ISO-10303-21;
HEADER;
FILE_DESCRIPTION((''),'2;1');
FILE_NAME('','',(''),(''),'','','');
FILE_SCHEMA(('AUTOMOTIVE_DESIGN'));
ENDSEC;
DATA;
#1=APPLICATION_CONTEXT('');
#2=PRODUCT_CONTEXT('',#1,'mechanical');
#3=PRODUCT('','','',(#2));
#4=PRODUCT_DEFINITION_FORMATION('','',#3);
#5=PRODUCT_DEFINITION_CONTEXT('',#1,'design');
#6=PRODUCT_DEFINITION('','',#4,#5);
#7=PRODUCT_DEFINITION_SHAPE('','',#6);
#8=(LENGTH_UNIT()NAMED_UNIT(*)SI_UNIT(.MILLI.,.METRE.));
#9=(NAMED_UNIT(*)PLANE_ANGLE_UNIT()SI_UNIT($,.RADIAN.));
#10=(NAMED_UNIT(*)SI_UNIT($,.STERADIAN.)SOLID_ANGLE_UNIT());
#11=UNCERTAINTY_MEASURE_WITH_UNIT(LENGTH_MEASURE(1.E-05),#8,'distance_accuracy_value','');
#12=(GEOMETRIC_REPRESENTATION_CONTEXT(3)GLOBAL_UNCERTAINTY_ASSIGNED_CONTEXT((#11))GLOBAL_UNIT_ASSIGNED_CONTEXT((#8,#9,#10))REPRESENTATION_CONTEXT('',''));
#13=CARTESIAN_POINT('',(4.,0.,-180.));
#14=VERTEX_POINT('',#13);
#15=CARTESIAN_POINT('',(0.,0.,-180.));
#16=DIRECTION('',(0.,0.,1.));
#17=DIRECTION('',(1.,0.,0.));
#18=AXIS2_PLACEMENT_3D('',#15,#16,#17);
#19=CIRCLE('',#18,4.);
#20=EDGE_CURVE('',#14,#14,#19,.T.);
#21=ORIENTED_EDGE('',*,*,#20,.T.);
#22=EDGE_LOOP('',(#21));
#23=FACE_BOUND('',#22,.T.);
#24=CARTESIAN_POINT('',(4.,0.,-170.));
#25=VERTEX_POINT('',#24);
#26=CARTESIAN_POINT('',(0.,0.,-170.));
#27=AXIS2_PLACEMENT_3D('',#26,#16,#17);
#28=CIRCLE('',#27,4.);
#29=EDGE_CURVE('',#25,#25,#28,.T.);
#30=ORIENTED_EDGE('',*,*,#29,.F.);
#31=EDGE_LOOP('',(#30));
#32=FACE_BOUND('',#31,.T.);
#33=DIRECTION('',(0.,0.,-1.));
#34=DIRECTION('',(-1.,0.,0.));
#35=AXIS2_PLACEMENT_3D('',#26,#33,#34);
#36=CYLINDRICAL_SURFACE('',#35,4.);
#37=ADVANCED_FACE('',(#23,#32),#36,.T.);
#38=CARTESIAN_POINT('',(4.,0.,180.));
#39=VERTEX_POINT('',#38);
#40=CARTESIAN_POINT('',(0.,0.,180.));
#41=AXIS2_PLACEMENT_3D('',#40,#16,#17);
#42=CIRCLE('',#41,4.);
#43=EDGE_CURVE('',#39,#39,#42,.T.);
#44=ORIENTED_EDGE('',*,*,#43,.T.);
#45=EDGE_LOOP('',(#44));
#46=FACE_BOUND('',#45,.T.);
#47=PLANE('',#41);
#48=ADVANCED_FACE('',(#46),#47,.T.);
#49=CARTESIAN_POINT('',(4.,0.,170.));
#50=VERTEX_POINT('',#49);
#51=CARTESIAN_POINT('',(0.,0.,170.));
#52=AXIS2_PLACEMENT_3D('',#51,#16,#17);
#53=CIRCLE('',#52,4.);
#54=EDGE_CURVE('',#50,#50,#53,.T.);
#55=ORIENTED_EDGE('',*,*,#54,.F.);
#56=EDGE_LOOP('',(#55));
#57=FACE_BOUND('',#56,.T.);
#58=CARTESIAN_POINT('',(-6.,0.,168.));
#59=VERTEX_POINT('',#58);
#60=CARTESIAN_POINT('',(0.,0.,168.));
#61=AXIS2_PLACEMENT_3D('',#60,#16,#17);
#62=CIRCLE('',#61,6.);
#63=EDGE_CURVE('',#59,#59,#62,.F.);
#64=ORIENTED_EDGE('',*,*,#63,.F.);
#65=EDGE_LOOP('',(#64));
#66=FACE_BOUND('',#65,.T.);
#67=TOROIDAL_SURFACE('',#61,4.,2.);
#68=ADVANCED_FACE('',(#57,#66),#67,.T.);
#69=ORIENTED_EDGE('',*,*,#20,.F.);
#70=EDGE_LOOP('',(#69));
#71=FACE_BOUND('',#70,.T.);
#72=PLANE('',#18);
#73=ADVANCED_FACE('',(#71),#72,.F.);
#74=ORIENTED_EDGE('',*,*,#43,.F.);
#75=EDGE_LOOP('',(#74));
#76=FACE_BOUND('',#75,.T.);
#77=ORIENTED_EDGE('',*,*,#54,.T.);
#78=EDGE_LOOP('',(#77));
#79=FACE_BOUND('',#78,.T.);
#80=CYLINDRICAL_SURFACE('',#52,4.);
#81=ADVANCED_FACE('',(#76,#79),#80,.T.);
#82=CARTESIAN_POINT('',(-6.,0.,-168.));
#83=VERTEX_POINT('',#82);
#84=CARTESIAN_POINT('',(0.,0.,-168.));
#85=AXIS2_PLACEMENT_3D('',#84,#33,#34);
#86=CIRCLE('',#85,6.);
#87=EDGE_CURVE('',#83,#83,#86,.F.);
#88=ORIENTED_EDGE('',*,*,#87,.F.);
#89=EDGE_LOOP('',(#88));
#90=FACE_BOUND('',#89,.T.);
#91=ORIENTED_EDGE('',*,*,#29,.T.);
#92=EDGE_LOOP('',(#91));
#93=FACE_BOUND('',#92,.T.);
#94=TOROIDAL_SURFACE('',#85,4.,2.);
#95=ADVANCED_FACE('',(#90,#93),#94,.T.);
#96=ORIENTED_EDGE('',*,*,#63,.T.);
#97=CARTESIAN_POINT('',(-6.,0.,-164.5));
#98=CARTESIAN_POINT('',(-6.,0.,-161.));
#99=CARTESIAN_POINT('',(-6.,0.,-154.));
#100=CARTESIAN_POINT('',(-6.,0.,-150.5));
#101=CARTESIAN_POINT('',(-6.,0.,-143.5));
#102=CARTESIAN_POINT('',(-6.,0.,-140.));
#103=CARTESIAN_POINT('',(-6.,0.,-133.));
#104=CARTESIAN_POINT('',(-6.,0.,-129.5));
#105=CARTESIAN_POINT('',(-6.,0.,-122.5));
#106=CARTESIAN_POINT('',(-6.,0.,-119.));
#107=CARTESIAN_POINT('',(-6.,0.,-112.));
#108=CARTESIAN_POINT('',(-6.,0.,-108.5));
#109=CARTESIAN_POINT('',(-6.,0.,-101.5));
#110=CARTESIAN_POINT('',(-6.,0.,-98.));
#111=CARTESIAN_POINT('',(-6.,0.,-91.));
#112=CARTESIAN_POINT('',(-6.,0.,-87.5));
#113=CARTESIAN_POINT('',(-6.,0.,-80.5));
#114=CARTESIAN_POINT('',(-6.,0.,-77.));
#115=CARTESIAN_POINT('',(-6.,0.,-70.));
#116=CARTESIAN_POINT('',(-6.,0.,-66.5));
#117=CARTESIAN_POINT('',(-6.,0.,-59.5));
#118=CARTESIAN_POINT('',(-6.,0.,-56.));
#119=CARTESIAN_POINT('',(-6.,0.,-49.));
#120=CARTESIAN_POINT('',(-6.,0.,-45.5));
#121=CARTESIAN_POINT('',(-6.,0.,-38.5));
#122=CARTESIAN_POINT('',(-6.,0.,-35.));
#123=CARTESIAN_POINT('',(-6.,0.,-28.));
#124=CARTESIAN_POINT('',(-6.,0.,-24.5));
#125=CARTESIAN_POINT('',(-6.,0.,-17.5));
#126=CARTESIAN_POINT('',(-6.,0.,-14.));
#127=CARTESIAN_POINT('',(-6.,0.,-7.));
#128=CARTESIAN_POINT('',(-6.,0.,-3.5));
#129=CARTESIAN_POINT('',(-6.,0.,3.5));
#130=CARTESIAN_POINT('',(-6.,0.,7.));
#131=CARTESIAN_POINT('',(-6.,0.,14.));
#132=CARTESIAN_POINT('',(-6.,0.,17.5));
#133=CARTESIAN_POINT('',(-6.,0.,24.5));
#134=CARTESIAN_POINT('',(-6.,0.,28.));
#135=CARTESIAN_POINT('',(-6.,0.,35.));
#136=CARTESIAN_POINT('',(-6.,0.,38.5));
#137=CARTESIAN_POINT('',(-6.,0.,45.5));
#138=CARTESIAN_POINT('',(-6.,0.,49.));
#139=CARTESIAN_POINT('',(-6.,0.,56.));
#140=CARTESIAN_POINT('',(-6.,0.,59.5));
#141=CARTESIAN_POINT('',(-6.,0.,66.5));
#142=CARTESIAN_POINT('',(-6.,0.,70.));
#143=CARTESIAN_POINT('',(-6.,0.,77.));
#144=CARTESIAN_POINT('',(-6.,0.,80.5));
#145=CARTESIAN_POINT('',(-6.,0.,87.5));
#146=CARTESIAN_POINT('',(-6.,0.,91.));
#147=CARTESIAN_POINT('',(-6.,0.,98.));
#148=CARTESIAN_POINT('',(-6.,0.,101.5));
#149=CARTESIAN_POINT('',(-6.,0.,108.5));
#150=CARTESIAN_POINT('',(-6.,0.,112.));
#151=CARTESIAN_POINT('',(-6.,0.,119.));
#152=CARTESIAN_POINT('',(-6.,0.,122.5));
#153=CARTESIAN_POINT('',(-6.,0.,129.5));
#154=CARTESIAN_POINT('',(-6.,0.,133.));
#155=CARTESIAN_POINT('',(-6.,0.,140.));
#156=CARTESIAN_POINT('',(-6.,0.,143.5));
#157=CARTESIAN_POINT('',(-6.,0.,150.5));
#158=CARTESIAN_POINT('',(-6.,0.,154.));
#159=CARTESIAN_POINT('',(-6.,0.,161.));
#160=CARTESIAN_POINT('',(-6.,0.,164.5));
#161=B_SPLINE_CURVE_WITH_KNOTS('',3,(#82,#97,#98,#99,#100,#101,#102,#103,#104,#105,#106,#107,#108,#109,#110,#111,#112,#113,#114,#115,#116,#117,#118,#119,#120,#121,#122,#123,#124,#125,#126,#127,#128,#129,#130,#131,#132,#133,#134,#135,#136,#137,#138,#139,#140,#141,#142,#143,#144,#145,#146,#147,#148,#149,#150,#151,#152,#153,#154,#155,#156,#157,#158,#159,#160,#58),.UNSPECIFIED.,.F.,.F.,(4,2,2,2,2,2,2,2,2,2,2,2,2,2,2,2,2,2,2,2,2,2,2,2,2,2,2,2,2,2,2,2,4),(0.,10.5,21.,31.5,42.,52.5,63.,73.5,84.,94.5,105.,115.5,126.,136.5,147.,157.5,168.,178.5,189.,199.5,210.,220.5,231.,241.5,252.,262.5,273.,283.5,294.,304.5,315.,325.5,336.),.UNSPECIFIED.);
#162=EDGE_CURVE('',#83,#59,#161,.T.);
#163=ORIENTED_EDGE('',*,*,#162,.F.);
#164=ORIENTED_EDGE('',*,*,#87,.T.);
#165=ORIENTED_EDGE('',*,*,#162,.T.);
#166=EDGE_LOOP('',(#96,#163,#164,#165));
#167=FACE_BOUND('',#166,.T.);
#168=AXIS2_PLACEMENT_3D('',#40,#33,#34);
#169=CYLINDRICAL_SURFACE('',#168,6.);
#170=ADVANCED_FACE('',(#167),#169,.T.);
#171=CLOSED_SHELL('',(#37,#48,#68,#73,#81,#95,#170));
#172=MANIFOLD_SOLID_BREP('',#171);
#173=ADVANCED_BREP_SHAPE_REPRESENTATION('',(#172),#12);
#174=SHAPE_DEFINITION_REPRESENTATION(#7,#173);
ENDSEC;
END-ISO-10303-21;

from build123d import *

# Parameters (mm, degrees)
SKETCH1_R            = 6
BOSS_EXTRUDE1_DEPTH  = 180
SKETCH2_R            = 6
SKETCH2_R_2          = 4
CUT_EXTRUDE1_DEPTH   = 10
FILLET1_R            = 2
FILLET1_OF_MIRROR1_R = 2


with BuildPart() as part:
    # Sketch1 → Boss-Extrude1 (new, symmetric)
    with BuildSketch(Plane.XY):
        with Locations(Location((0, 0, 0), (0, 0, 180))):
            Circle(SKETCH1_R)
    extrude(amount=BOSS_EXTRUDE1_DEPTH, both=True)

    # Sketch2 → Cut-Extrude1 (cut)
    with BuildSketch(Plane.XY.offset(180)):
        with Locations(Location((0, 0, 0), (0, 0, 180))):
            Circle(SKETCH2_R)
        Circle(SKETCH2_R_2, mode=Mode.SUBTRACT)
    cut_extrude1 = extrude(amount=-CUT_EXTRUDE1_DEPTH, mode=Mode.SUBTRACT)

    # Fillet1
    fillet1_edges = [part.edges().sort_by_distance(p)[0] for p in [
        (6, 0, 170),
    ]]
    fillet(fillet1_edges, radius=FILLET1_R - 0.0001)  # a hair under: the kernel refuses the full size

    # Mirror1: Cut-Extrude1 across plane
    add(cut_extrude1.mirror(Plane.XY), mode=Mode.SUBTRACT)

    # Fillet1 of Mirror1
    fillet1_of_mirror1_edges = [part.edges().sort_by_distance(p)[0] for p in [
        (6, 0, -170),
    ]]
    fillet(fillet1_of_mirror1_edges, radius=FILLET1_OF_MIRROR1_R - 0.0001)  # a hair under: the kernel refuses the full size


solid = part.part
